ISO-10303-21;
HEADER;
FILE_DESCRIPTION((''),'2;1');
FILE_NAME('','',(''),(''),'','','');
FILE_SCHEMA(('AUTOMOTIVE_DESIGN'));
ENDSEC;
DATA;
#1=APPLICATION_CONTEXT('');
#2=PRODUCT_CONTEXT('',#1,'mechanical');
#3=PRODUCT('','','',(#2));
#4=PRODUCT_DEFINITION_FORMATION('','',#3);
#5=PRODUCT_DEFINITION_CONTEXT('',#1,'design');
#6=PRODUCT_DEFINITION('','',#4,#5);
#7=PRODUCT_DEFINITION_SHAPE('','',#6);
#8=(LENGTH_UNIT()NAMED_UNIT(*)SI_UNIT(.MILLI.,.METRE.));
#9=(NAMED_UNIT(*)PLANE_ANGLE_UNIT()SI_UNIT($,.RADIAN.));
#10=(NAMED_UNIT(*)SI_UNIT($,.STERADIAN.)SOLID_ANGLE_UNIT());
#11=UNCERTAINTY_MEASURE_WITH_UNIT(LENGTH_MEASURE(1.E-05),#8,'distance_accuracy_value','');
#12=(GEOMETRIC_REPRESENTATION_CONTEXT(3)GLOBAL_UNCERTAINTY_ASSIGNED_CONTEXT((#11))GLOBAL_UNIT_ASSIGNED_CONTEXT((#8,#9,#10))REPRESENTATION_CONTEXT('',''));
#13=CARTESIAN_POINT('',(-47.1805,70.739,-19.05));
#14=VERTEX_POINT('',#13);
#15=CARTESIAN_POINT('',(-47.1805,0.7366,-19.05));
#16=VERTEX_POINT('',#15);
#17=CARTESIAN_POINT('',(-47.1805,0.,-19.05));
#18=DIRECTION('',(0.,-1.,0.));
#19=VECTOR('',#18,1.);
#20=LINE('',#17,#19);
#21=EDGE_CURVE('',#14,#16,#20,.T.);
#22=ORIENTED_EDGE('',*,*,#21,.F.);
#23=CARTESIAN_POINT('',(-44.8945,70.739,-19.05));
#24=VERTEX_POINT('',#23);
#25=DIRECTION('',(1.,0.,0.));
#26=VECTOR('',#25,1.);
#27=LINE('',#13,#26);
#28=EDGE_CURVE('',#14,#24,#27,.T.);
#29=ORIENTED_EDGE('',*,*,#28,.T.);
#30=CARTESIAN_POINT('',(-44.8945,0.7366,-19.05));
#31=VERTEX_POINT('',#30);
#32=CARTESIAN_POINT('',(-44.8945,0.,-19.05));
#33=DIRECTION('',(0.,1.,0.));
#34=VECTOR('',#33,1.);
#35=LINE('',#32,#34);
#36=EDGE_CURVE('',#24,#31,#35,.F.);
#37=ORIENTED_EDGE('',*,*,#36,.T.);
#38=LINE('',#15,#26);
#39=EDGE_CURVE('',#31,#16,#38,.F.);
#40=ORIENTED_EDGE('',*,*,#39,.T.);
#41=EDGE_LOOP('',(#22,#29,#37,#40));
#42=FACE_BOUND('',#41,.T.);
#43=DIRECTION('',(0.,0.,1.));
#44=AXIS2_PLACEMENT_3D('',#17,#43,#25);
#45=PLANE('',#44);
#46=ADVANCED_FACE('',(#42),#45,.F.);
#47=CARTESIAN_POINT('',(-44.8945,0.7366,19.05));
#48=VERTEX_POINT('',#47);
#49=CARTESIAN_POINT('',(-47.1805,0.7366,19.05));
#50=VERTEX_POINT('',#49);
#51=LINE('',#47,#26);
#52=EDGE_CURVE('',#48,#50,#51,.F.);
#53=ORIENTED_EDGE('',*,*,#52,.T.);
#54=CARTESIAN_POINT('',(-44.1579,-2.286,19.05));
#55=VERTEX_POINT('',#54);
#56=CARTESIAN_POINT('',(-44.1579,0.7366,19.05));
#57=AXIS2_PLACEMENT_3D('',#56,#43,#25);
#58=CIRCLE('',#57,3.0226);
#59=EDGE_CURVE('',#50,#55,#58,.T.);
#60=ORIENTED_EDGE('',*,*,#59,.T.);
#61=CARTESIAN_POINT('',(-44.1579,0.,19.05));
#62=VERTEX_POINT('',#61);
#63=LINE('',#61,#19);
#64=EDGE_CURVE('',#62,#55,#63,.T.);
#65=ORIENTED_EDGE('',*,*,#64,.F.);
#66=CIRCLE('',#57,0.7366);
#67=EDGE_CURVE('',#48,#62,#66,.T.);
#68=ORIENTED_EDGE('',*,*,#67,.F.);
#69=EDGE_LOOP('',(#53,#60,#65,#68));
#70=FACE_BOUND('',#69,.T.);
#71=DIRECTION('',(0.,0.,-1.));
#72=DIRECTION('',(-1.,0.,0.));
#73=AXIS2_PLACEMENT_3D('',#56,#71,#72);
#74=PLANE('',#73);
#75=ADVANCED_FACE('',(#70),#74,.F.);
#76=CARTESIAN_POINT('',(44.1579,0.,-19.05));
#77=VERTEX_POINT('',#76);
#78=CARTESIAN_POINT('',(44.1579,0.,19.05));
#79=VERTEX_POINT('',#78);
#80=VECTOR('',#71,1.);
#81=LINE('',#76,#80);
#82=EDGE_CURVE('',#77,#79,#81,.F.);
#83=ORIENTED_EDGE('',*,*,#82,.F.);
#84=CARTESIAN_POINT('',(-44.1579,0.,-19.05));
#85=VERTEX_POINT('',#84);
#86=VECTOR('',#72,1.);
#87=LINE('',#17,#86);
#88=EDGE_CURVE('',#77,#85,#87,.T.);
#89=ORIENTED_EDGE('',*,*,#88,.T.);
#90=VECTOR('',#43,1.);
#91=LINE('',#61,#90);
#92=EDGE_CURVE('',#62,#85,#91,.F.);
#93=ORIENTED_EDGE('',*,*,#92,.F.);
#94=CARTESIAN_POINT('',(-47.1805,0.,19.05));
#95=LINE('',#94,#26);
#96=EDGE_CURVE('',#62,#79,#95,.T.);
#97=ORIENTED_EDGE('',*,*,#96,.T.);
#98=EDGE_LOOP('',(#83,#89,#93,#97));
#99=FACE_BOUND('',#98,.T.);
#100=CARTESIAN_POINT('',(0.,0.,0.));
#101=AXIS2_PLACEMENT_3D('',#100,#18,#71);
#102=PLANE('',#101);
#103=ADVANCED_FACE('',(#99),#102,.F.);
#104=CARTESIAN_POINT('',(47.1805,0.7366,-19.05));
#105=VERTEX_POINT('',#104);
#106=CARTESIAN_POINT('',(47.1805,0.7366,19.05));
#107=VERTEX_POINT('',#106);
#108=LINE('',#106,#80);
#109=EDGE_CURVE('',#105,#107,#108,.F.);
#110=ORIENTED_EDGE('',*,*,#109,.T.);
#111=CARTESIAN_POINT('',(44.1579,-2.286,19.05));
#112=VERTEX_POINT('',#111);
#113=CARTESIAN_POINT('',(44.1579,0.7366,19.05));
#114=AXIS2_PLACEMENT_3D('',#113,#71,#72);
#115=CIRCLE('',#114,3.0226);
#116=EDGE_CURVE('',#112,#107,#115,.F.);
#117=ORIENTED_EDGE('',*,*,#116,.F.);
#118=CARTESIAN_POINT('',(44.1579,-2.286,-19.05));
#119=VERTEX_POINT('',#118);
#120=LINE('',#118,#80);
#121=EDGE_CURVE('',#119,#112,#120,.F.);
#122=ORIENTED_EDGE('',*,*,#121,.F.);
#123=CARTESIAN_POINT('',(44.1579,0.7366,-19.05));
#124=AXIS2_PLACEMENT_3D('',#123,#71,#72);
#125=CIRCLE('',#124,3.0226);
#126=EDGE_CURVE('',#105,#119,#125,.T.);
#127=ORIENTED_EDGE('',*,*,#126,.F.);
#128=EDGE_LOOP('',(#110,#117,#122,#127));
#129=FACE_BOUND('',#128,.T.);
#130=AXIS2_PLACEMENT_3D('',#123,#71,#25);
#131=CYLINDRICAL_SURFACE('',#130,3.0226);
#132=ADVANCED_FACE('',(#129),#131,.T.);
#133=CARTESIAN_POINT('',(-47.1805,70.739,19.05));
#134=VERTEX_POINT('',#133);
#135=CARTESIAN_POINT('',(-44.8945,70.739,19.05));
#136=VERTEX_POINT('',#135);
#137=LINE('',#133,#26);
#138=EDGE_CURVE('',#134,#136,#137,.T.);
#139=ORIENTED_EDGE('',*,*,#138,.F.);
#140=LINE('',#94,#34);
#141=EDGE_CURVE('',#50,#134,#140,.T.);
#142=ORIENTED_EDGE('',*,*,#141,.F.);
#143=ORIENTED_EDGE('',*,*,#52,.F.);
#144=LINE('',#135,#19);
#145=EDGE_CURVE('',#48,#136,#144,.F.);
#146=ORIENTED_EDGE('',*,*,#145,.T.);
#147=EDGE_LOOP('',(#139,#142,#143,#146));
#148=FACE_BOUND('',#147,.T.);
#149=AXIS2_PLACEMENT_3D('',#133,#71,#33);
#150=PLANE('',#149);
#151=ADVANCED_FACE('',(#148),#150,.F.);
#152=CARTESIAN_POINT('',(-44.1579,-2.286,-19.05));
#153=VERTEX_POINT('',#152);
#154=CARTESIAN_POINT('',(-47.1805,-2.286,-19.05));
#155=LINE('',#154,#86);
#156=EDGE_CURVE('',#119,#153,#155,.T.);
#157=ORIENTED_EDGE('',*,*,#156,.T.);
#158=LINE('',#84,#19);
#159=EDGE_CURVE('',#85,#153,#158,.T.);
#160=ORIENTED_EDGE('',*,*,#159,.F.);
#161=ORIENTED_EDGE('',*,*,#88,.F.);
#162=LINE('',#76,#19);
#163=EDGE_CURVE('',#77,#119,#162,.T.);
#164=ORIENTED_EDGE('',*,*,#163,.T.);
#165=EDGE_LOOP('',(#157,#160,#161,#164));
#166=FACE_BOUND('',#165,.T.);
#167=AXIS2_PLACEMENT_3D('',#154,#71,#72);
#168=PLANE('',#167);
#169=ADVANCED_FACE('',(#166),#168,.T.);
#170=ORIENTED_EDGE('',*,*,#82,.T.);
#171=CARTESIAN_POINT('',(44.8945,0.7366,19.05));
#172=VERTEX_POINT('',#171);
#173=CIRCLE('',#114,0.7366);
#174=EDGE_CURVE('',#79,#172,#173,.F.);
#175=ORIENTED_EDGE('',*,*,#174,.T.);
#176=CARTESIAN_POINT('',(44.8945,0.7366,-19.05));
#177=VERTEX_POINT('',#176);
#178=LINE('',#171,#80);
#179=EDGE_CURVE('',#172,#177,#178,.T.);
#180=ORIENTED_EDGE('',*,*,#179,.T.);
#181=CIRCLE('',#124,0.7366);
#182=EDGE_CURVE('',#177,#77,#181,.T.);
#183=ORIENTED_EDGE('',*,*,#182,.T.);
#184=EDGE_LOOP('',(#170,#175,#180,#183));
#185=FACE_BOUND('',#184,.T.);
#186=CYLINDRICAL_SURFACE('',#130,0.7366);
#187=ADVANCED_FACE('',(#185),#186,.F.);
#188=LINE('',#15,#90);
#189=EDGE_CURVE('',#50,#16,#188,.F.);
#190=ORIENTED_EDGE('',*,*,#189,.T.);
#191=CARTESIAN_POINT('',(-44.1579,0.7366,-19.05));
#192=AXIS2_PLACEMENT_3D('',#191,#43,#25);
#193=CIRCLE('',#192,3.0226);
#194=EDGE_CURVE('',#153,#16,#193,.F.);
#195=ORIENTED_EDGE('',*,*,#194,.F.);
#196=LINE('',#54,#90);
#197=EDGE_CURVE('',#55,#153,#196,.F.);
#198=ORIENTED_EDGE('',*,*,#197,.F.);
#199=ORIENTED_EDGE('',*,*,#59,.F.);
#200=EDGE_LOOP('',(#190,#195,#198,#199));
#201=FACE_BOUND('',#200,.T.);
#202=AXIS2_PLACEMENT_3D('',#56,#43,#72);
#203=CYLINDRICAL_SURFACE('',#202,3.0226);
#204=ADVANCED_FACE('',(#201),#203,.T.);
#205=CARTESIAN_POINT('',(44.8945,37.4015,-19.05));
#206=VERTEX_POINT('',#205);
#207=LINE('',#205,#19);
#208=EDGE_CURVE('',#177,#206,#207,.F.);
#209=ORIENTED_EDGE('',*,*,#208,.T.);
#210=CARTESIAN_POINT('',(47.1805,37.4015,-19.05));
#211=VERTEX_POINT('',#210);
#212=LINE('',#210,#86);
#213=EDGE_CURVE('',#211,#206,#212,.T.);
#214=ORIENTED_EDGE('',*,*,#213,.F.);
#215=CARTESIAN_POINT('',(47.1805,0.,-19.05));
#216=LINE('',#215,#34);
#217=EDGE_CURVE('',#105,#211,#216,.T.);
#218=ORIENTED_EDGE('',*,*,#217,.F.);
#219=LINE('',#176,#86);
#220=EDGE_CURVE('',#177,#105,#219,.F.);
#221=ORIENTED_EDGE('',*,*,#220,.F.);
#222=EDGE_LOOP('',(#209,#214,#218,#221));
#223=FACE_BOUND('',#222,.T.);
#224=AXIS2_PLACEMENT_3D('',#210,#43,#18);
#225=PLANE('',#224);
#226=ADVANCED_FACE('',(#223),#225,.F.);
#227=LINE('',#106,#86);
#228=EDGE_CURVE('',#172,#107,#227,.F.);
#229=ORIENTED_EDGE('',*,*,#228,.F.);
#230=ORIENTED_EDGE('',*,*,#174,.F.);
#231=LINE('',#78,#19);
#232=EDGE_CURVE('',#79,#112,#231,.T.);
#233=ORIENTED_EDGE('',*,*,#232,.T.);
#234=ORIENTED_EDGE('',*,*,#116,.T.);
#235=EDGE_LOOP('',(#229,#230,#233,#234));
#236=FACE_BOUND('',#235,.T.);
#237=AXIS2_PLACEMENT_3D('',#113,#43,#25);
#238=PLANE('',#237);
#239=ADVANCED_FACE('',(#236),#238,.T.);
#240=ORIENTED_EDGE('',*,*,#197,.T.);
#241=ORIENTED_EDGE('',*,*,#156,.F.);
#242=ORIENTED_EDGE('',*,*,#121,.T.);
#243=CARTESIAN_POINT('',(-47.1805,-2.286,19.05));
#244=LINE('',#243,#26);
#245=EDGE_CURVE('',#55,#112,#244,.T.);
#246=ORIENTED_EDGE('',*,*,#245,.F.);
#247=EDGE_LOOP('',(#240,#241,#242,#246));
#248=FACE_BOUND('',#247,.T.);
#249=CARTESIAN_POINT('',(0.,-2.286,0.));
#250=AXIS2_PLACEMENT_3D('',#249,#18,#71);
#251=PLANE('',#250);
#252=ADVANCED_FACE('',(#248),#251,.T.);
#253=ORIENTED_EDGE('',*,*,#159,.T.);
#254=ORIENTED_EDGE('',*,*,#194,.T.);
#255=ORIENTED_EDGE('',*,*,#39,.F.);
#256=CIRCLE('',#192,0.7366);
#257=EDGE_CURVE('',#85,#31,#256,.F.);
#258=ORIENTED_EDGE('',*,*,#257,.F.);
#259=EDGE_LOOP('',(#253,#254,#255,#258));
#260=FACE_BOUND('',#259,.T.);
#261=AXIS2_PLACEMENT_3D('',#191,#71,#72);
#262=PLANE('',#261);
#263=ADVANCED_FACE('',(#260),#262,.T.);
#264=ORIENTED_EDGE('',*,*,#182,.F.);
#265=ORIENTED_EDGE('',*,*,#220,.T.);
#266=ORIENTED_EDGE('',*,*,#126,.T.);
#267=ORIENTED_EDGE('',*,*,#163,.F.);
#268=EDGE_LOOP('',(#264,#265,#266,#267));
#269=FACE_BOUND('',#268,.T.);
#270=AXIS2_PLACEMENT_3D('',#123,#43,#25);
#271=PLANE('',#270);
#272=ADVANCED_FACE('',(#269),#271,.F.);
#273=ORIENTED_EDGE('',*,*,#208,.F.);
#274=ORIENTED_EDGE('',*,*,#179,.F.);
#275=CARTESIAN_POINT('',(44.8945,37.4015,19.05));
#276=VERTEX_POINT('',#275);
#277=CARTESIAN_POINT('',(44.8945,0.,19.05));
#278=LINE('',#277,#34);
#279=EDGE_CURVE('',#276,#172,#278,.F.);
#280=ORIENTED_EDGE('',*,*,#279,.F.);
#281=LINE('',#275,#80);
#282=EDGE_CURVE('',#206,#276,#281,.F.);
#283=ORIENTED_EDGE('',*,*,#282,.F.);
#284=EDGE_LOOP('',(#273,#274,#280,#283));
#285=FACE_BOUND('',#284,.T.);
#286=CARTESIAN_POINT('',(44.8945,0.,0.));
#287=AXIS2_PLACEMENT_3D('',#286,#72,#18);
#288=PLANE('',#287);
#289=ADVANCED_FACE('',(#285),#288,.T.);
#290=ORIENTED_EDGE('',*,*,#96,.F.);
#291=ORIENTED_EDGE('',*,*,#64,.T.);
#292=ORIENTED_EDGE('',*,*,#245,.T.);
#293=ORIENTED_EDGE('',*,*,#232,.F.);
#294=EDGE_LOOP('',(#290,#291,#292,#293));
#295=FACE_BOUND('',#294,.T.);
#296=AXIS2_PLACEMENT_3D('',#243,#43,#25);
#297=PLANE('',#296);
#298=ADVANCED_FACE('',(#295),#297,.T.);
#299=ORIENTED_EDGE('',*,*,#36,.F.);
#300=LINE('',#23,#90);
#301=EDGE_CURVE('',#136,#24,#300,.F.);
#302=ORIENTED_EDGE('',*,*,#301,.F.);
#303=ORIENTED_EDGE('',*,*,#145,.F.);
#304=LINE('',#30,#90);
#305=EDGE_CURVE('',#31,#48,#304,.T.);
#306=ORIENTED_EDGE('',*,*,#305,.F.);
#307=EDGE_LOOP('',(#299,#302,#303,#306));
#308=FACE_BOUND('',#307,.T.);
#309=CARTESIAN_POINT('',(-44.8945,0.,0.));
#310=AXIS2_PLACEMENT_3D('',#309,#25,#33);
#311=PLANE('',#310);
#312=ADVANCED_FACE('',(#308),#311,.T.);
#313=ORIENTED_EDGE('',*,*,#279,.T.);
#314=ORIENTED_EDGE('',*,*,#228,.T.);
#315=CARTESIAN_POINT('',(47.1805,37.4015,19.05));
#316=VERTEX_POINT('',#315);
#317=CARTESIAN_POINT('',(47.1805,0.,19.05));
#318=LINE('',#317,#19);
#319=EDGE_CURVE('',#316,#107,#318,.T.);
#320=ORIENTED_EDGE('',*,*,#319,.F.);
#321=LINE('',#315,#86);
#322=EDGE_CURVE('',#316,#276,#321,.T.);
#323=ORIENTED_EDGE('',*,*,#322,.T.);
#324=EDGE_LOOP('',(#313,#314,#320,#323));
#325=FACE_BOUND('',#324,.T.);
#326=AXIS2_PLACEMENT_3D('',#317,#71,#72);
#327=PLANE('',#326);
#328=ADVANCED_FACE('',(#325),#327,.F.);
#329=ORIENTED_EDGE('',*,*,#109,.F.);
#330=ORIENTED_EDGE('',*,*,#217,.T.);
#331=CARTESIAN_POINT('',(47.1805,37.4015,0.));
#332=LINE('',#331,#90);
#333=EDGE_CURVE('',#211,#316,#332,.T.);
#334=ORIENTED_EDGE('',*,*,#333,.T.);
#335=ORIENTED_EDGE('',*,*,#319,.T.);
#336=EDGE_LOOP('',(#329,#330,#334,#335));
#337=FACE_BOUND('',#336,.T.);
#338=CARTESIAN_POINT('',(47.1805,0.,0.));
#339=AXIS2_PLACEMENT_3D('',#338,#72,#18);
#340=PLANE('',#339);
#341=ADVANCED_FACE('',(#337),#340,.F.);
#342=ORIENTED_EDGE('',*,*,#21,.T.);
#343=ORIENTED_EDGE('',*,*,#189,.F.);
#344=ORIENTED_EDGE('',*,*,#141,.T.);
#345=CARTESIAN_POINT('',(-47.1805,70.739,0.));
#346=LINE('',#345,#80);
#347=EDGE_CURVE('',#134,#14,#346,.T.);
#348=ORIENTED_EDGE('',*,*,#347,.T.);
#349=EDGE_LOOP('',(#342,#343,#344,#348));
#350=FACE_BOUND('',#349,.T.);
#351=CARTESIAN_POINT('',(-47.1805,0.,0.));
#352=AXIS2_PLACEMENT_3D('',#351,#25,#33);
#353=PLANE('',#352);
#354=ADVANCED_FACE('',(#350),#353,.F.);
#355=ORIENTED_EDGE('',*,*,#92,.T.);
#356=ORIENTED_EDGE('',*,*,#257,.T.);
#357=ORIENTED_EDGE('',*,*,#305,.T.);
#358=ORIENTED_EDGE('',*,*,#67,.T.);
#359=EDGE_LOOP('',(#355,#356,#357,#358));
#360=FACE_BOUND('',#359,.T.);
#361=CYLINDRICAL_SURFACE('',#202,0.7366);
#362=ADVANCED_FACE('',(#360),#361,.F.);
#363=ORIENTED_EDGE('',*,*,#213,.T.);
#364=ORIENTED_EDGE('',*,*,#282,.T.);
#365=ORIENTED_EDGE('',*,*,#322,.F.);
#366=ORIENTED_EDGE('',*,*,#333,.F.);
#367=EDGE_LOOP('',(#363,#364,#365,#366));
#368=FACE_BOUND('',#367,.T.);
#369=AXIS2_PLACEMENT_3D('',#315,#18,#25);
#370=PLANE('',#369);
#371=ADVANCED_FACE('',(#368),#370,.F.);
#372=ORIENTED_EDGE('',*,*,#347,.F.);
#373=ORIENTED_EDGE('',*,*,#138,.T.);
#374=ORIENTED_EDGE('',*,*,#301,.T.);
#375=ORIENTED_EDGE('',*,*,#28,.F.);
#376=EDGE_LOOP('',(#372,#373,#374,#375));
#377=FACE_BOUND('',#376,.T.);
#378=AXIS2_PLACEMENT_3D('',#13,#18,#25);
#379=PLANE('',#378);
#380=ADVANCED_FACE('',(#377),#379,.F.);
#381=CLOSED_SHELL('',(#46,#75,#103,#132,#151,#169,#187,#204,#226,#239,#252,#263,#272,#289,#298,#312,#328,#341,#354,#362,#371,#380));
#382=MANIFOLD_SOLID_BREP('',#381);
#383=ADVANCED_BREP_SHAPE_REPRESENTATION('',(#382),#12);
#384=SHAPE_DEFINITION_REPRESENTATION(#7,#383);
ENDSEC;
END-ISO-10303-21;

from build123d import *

# Parameters (mm, degrees)
SKETCH1_W                    = 94.361
SKETCH1_H                    = 38.1
BASE_FLANGE1_DEPTH           = 2.286
EDGE_FLANGE1_STRIP_W         = 10.6172
EDGE_FLANGE1_STRIP_H         = 2.286
EDGE_FLANGE1_STRIP_CUT_DEPTH = 38.1
EDGE_FLANGE1_DEPTH           = 38.1
EDGE_FLANGE2_STRIP_W         = 10.6172
EDGE_FLANGE2_STRIP_H         = 2.286
EDGE_FLANGE2_STRIP_CUT_DEPTH = 38.1
EDGE_FLANGE2_DEPTH           = 38.1


# Sheet-metal steps are written as plain solids
with BuildPart() as part:
    # Sketch1 → Base-Flange1 (new body)
    with BuildSketch(Plane(origin=(0, 0, 0), x_dir=(1, 0, 0), z_dir=(0, 1, 0))):
        Rectangle(SKETCH1_W, SKETCH1_H)
    extrude(amount=-BASE_FLANGE1_DEPTH)

    # Edge-Flange1 strip (across the edge) → Edge-Flange1 strip cut (cut)
    with BuildSketch(Plane(origin=(47.1805, 0, 19.05), x_dir=(-1, 0, 0), z_dir=(0, 0, -1))):
        with Locations((-2.286, -1.143)):
            Rectangle(EDGE_FLANGE1_STRIP_W, EDGE_FLANGE1_STRIP_H)
    extrude(amount=EDGE_FLANGE1_STRIP_CUT_DEPTH, mode=Mode.SUBTRACT)

    # Edge-Flange1 section (across the edge) → Edge-Flange1 (add)
    with BuildSketch(Plane(origin=(47.1805, 0, 19.05), x_dir=(-1, 0, 0), z_dir=(0, 0, -1))):
        with BuildLine():
            Line((0, 0.7366), (0, 37.4015))
            Line((0, 37.4015), (2.286, 37.4015))
            Line((2.286, 37.4015), (2.286, 0.7366))
            ThreePointArc((2.286, 0.7366), (2.501745145, 0.215745145), (3.0226, 0))
            Line((3.0226, 0), (3.0226, -2.286))
            ThreePointArc((3.0226, -2.286), (0.885299043, -1.400700957), (0, 0.7366))
        make_face()
    extrude(amount=EDGE_FLANGE1_DEPTH)

    # Edge-Flange2 strip (across the edge) → Edge-Flange2 strip cut (cut)
    with BuildSketch(Plane(origin=(-47.1805, 0, -19.05), x_dir=(1, 0, 0), z_dir=(0, 0, 1))):
        with Locations((-2.286, -1.143)):
            Rectangle(EDGE_FLANGE2_STRIP_W, EDGE_FLANGE2_STRIP_H)
    extrude(amount=EDGE_FLANGE2_STRIP_CUT_DEPTH, mode=Mode.SUBTRACT)

    # Edge-Flange2 section (across the edge) → Edge-Flange2 (add)
    with BuildSketch(Plane(origin=(-47.1805, 0, -19.05), x_dir=(1, 0, 0), z_dir=(0, 0, 1))):
        with BuildLine():
            Line((0, 0.7366), (0, 70.739))
            Line((0, 70.739), (2.286, 70.739))
            Line((2.286, 70.739), (2.286, 0.7366))
            ThreePointArc((2.286, 0.7366), (2.501745145, 0.215745145), (3.0226, 0))
            Line((3.0226, 0), (3.0226, -2.286))
            ThreePointArc((3.0226, -2.286), (0.885299043, -1.400700957), (0, 0.7366))
        make_face()
    extrude(amount=EDGE_FLANGE2_DEPTH)


solid = part.part
